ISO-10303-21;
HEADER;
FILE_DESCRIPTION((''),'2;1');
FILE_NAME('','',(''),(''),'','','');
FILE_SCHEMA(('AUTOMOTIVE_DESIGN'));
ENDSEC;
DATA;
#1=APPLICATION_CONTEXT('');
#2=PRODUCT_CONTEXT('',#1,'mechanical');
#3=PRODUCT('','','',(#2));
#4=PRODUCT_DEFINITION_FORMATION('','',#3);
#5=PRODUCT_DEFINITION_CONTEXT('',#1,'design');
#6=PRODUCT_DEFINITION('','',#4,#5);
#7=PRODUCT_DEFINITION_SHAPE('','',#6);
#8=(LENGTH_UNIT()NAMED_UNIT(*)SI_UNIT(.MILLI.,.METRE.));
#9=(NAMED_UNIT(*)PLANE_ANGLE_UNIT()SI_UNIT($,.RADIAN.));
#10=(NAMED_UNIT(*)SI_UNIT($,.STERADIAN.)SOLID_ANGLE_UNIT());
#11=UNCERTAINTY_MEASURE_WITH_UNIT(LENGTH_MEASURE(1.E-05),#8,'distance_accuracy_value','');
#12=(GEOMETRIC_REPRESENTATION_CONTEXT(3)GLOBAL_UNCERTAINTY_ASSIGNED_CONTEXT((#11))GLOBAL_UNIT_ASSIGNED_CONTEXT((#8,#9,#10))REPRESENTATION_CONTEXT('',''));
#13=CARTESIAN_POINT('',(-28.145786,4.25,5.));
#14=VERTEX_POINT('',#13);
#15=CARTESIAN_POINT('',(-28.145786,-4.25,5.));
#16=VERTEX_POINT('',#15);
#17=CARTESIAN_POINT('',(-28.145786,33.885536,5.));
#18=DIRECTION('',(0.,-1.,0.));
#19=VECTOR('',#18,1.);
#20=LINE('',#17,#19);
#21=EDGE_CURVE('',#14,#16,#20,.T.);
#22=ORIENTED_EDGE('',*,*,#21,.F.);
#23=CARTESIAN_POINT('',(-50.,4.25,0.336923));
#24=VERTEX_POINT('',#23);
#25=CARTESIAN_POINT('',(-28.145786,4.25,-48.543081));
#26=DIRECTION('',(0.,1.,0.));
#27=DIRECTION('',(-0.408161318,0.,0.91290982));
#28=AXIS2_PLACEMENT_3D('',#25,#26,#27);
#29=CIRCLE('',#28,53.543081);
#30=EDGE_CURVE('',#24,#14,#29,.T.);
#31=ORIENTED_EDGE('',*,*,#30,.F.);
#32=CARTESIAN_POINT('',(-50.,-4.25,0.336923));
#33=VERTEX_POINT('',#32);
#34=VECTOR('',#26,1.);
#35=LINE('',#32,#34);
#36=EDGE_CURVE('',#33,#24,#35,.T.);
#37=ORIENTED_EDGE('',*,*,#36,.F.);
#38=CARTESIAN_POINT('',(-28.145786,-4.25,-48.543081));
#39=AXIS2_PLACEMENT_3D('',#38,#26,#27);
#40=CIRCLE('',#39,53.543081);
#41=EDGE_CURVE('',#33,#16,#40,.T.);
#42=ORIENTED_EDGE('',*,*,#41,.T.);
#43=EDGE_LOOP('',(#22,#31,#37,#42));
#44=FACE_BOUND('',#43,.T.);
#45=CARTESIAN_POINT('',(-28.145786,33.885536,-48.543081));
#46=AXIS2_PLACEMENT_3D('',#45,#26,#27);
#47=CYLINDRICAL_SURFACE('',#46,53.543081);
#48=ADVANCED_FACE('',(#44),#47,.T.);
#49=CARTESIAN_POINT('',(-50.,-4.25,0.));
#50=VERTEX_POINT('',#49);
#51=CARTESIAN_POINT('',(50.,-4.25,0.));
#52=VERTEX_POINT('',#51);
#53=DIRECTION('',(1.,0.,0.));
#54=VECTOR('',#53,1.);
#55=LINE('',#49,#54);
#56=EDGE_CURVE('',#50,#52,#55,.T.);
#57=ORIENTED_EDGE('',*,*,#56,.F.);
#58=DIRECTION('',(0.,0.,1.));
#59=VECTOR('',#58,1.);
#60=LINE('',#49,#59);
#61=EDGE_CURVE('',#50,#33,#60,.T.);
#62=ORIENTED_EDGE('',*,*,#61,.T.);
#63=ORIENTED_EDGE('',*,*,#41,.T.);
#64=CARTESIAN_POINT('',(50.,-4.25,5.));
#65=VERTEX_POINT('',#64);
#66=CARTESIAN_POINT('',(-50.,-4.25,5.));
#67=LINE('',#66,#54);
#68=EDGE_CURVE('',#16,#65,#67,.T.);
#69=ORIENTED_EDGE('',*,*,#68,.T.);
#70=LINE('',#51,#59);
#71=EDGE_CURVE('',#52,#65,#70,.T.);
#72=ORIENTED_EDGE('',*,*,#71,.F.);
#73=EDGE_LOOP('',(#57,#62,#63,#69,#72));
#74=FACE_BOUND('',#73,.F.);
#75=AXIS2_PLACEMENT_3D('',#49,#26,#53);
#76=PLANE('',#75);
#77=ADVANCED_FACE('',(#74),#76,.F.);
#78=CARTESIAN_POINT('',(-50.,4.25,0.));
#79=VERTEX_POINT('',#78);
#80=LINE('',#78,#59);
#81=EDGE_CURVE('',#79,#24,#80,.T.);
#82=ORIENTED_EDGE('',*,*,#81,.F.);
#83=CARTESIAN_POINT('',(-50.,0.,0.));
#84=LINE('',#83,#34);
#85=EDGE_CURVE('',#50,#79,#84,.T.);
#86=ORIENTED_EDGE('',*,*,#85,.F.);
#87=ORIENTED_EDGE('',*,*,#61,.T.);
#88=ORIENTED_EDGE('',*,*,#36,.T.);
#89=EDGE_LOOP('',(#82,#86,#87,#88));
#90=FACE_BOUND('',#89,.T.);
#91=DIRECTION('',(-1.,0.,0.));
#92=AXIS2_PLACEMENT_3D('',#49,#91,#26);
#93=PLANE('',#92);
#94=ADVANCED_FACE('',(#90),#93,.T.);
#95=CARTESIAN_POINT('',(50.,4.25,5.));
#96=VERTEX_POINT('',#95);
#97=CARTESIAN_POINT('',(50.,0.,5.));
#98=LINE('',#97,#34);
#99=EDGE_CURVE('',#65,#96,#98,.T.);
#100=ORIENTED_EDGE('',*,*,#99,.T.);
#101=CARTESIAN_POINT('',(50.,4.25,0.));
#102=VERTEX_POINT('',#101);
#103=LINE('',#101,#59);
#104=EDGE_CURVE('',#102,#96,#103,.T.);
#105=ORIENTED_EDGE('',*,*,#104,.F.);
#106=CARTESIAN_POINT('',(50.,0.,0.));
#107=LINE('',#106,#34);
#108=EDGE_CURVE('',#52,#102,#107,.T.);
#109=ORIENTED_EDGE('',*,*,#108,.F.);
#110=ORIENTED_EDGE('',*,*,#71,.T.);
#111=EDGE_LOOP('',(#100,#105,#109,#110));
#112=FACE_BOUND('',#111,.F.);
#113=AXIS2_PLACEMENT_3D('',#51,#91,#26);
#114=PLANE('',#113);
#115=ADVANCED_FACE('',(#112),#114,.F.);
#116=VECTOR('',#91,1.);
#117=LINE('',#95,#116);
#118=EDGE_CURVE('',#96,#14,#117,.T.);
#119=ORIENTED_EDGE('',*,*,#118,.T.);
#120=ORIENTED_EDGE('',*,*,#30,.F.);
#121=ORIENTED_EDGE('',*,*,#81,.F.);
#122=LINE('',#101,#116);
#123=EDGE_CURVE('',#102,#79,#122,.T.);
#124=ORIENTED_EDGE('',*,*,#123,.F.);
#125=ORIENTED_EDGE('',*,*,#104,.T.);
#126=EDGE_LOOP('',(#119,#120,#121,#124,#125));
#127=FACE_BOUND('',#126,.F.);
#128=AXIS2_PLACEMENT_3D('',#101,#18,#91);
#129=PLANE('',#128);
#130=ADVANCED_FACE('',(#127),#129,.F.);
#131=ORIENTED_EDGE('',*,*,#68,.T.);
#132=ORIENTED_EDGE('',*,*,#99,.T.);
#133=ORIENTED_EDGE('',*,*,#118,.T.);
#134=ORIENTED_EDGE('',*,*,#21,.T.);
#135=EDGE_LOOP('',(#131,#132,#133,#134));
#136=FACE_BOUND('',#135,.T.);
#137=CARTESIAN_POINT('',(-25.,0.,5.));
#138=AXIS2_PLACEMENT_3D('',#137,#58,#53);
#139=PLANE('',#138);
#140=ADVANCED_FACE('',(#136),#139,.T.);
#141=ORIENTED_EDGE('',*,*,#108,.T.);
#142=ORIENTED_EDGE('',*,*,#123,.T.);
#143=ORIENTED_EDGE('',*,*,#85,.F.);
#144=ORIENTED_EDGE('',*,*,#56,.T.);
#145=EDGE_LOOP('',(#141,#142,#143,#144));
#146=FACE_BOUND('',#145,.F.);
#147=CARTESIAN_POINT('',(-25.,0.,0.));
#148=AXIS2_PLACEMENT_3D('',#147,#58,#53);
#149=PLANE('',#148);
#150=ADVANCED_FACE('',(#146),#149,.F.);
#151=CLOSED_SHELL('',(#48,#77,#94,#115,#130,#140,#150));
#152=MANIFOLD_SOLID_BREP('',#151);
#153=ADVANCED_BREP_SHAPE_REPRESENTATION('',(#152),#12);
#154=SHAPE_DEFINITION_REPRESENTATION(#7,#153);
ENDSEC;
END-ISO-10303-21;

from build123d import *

# Parameters (mm, degrees)
F0_W        = 50
F0_H        = 8.5
F1_DEPTH    = 5
F2_SIZE2    = 4.6630765815
F2_SIZE     = 10
F3_T1_DEPTH = 67.7710723862


# Not quite as in the source:
# - a fillet or chamfer that OpenCascade refuses, or shapes differently, is made with other operations: its cross-section is extruded or revolved along the edge and cut away or added
# - a feature of the source that left no trace in its solid (it failed there, or was rolled back) is left out


with BuildPart() as f1:
    # F0 (on Top) → F1 (new body)
    with BuildSketch(Plane.XY):
        with Locations((-25, 0)):
            Rectangle(F0_W, F0_H)
        with Locations((25, 0)):
            Rectangle(F0_W, F0_H)
    extrude(amount=F1_DEPTH)

    # F2
    f2_edges = [f1.edges().sort_by_distance(p)[0] for p in [
        (-50, 0, 5),
    ]]
    f2_side = f1.faces().sort_by_distance((0, 0, 5))[0]
    chamfer(f2_edges, length=F2_SIZE, length2=F2_SIZE2, reference=f2_side)

    # F3: fillet of radius 53.5430809348 on 1 edges, made by hand

    # F3_s2 → F3_t1 (cut)
    with BuildSketch(Plane.XZ.offset(-33.8855361931)):
        with BuildLine():
            ThreePointArc((-50, 0.3369234184), (-39.3188667185, 3.8212559042), (-28.1457855228, 5))
            Line((-28.1457855228, 5), (-40, 5))
            Line((-40, 5), (-50, 0.3369234184))
        make_face()
    extrude(amount=F3_T1_DEPTH, mode=Mode.SUBTRACT)


solid = f1.part
